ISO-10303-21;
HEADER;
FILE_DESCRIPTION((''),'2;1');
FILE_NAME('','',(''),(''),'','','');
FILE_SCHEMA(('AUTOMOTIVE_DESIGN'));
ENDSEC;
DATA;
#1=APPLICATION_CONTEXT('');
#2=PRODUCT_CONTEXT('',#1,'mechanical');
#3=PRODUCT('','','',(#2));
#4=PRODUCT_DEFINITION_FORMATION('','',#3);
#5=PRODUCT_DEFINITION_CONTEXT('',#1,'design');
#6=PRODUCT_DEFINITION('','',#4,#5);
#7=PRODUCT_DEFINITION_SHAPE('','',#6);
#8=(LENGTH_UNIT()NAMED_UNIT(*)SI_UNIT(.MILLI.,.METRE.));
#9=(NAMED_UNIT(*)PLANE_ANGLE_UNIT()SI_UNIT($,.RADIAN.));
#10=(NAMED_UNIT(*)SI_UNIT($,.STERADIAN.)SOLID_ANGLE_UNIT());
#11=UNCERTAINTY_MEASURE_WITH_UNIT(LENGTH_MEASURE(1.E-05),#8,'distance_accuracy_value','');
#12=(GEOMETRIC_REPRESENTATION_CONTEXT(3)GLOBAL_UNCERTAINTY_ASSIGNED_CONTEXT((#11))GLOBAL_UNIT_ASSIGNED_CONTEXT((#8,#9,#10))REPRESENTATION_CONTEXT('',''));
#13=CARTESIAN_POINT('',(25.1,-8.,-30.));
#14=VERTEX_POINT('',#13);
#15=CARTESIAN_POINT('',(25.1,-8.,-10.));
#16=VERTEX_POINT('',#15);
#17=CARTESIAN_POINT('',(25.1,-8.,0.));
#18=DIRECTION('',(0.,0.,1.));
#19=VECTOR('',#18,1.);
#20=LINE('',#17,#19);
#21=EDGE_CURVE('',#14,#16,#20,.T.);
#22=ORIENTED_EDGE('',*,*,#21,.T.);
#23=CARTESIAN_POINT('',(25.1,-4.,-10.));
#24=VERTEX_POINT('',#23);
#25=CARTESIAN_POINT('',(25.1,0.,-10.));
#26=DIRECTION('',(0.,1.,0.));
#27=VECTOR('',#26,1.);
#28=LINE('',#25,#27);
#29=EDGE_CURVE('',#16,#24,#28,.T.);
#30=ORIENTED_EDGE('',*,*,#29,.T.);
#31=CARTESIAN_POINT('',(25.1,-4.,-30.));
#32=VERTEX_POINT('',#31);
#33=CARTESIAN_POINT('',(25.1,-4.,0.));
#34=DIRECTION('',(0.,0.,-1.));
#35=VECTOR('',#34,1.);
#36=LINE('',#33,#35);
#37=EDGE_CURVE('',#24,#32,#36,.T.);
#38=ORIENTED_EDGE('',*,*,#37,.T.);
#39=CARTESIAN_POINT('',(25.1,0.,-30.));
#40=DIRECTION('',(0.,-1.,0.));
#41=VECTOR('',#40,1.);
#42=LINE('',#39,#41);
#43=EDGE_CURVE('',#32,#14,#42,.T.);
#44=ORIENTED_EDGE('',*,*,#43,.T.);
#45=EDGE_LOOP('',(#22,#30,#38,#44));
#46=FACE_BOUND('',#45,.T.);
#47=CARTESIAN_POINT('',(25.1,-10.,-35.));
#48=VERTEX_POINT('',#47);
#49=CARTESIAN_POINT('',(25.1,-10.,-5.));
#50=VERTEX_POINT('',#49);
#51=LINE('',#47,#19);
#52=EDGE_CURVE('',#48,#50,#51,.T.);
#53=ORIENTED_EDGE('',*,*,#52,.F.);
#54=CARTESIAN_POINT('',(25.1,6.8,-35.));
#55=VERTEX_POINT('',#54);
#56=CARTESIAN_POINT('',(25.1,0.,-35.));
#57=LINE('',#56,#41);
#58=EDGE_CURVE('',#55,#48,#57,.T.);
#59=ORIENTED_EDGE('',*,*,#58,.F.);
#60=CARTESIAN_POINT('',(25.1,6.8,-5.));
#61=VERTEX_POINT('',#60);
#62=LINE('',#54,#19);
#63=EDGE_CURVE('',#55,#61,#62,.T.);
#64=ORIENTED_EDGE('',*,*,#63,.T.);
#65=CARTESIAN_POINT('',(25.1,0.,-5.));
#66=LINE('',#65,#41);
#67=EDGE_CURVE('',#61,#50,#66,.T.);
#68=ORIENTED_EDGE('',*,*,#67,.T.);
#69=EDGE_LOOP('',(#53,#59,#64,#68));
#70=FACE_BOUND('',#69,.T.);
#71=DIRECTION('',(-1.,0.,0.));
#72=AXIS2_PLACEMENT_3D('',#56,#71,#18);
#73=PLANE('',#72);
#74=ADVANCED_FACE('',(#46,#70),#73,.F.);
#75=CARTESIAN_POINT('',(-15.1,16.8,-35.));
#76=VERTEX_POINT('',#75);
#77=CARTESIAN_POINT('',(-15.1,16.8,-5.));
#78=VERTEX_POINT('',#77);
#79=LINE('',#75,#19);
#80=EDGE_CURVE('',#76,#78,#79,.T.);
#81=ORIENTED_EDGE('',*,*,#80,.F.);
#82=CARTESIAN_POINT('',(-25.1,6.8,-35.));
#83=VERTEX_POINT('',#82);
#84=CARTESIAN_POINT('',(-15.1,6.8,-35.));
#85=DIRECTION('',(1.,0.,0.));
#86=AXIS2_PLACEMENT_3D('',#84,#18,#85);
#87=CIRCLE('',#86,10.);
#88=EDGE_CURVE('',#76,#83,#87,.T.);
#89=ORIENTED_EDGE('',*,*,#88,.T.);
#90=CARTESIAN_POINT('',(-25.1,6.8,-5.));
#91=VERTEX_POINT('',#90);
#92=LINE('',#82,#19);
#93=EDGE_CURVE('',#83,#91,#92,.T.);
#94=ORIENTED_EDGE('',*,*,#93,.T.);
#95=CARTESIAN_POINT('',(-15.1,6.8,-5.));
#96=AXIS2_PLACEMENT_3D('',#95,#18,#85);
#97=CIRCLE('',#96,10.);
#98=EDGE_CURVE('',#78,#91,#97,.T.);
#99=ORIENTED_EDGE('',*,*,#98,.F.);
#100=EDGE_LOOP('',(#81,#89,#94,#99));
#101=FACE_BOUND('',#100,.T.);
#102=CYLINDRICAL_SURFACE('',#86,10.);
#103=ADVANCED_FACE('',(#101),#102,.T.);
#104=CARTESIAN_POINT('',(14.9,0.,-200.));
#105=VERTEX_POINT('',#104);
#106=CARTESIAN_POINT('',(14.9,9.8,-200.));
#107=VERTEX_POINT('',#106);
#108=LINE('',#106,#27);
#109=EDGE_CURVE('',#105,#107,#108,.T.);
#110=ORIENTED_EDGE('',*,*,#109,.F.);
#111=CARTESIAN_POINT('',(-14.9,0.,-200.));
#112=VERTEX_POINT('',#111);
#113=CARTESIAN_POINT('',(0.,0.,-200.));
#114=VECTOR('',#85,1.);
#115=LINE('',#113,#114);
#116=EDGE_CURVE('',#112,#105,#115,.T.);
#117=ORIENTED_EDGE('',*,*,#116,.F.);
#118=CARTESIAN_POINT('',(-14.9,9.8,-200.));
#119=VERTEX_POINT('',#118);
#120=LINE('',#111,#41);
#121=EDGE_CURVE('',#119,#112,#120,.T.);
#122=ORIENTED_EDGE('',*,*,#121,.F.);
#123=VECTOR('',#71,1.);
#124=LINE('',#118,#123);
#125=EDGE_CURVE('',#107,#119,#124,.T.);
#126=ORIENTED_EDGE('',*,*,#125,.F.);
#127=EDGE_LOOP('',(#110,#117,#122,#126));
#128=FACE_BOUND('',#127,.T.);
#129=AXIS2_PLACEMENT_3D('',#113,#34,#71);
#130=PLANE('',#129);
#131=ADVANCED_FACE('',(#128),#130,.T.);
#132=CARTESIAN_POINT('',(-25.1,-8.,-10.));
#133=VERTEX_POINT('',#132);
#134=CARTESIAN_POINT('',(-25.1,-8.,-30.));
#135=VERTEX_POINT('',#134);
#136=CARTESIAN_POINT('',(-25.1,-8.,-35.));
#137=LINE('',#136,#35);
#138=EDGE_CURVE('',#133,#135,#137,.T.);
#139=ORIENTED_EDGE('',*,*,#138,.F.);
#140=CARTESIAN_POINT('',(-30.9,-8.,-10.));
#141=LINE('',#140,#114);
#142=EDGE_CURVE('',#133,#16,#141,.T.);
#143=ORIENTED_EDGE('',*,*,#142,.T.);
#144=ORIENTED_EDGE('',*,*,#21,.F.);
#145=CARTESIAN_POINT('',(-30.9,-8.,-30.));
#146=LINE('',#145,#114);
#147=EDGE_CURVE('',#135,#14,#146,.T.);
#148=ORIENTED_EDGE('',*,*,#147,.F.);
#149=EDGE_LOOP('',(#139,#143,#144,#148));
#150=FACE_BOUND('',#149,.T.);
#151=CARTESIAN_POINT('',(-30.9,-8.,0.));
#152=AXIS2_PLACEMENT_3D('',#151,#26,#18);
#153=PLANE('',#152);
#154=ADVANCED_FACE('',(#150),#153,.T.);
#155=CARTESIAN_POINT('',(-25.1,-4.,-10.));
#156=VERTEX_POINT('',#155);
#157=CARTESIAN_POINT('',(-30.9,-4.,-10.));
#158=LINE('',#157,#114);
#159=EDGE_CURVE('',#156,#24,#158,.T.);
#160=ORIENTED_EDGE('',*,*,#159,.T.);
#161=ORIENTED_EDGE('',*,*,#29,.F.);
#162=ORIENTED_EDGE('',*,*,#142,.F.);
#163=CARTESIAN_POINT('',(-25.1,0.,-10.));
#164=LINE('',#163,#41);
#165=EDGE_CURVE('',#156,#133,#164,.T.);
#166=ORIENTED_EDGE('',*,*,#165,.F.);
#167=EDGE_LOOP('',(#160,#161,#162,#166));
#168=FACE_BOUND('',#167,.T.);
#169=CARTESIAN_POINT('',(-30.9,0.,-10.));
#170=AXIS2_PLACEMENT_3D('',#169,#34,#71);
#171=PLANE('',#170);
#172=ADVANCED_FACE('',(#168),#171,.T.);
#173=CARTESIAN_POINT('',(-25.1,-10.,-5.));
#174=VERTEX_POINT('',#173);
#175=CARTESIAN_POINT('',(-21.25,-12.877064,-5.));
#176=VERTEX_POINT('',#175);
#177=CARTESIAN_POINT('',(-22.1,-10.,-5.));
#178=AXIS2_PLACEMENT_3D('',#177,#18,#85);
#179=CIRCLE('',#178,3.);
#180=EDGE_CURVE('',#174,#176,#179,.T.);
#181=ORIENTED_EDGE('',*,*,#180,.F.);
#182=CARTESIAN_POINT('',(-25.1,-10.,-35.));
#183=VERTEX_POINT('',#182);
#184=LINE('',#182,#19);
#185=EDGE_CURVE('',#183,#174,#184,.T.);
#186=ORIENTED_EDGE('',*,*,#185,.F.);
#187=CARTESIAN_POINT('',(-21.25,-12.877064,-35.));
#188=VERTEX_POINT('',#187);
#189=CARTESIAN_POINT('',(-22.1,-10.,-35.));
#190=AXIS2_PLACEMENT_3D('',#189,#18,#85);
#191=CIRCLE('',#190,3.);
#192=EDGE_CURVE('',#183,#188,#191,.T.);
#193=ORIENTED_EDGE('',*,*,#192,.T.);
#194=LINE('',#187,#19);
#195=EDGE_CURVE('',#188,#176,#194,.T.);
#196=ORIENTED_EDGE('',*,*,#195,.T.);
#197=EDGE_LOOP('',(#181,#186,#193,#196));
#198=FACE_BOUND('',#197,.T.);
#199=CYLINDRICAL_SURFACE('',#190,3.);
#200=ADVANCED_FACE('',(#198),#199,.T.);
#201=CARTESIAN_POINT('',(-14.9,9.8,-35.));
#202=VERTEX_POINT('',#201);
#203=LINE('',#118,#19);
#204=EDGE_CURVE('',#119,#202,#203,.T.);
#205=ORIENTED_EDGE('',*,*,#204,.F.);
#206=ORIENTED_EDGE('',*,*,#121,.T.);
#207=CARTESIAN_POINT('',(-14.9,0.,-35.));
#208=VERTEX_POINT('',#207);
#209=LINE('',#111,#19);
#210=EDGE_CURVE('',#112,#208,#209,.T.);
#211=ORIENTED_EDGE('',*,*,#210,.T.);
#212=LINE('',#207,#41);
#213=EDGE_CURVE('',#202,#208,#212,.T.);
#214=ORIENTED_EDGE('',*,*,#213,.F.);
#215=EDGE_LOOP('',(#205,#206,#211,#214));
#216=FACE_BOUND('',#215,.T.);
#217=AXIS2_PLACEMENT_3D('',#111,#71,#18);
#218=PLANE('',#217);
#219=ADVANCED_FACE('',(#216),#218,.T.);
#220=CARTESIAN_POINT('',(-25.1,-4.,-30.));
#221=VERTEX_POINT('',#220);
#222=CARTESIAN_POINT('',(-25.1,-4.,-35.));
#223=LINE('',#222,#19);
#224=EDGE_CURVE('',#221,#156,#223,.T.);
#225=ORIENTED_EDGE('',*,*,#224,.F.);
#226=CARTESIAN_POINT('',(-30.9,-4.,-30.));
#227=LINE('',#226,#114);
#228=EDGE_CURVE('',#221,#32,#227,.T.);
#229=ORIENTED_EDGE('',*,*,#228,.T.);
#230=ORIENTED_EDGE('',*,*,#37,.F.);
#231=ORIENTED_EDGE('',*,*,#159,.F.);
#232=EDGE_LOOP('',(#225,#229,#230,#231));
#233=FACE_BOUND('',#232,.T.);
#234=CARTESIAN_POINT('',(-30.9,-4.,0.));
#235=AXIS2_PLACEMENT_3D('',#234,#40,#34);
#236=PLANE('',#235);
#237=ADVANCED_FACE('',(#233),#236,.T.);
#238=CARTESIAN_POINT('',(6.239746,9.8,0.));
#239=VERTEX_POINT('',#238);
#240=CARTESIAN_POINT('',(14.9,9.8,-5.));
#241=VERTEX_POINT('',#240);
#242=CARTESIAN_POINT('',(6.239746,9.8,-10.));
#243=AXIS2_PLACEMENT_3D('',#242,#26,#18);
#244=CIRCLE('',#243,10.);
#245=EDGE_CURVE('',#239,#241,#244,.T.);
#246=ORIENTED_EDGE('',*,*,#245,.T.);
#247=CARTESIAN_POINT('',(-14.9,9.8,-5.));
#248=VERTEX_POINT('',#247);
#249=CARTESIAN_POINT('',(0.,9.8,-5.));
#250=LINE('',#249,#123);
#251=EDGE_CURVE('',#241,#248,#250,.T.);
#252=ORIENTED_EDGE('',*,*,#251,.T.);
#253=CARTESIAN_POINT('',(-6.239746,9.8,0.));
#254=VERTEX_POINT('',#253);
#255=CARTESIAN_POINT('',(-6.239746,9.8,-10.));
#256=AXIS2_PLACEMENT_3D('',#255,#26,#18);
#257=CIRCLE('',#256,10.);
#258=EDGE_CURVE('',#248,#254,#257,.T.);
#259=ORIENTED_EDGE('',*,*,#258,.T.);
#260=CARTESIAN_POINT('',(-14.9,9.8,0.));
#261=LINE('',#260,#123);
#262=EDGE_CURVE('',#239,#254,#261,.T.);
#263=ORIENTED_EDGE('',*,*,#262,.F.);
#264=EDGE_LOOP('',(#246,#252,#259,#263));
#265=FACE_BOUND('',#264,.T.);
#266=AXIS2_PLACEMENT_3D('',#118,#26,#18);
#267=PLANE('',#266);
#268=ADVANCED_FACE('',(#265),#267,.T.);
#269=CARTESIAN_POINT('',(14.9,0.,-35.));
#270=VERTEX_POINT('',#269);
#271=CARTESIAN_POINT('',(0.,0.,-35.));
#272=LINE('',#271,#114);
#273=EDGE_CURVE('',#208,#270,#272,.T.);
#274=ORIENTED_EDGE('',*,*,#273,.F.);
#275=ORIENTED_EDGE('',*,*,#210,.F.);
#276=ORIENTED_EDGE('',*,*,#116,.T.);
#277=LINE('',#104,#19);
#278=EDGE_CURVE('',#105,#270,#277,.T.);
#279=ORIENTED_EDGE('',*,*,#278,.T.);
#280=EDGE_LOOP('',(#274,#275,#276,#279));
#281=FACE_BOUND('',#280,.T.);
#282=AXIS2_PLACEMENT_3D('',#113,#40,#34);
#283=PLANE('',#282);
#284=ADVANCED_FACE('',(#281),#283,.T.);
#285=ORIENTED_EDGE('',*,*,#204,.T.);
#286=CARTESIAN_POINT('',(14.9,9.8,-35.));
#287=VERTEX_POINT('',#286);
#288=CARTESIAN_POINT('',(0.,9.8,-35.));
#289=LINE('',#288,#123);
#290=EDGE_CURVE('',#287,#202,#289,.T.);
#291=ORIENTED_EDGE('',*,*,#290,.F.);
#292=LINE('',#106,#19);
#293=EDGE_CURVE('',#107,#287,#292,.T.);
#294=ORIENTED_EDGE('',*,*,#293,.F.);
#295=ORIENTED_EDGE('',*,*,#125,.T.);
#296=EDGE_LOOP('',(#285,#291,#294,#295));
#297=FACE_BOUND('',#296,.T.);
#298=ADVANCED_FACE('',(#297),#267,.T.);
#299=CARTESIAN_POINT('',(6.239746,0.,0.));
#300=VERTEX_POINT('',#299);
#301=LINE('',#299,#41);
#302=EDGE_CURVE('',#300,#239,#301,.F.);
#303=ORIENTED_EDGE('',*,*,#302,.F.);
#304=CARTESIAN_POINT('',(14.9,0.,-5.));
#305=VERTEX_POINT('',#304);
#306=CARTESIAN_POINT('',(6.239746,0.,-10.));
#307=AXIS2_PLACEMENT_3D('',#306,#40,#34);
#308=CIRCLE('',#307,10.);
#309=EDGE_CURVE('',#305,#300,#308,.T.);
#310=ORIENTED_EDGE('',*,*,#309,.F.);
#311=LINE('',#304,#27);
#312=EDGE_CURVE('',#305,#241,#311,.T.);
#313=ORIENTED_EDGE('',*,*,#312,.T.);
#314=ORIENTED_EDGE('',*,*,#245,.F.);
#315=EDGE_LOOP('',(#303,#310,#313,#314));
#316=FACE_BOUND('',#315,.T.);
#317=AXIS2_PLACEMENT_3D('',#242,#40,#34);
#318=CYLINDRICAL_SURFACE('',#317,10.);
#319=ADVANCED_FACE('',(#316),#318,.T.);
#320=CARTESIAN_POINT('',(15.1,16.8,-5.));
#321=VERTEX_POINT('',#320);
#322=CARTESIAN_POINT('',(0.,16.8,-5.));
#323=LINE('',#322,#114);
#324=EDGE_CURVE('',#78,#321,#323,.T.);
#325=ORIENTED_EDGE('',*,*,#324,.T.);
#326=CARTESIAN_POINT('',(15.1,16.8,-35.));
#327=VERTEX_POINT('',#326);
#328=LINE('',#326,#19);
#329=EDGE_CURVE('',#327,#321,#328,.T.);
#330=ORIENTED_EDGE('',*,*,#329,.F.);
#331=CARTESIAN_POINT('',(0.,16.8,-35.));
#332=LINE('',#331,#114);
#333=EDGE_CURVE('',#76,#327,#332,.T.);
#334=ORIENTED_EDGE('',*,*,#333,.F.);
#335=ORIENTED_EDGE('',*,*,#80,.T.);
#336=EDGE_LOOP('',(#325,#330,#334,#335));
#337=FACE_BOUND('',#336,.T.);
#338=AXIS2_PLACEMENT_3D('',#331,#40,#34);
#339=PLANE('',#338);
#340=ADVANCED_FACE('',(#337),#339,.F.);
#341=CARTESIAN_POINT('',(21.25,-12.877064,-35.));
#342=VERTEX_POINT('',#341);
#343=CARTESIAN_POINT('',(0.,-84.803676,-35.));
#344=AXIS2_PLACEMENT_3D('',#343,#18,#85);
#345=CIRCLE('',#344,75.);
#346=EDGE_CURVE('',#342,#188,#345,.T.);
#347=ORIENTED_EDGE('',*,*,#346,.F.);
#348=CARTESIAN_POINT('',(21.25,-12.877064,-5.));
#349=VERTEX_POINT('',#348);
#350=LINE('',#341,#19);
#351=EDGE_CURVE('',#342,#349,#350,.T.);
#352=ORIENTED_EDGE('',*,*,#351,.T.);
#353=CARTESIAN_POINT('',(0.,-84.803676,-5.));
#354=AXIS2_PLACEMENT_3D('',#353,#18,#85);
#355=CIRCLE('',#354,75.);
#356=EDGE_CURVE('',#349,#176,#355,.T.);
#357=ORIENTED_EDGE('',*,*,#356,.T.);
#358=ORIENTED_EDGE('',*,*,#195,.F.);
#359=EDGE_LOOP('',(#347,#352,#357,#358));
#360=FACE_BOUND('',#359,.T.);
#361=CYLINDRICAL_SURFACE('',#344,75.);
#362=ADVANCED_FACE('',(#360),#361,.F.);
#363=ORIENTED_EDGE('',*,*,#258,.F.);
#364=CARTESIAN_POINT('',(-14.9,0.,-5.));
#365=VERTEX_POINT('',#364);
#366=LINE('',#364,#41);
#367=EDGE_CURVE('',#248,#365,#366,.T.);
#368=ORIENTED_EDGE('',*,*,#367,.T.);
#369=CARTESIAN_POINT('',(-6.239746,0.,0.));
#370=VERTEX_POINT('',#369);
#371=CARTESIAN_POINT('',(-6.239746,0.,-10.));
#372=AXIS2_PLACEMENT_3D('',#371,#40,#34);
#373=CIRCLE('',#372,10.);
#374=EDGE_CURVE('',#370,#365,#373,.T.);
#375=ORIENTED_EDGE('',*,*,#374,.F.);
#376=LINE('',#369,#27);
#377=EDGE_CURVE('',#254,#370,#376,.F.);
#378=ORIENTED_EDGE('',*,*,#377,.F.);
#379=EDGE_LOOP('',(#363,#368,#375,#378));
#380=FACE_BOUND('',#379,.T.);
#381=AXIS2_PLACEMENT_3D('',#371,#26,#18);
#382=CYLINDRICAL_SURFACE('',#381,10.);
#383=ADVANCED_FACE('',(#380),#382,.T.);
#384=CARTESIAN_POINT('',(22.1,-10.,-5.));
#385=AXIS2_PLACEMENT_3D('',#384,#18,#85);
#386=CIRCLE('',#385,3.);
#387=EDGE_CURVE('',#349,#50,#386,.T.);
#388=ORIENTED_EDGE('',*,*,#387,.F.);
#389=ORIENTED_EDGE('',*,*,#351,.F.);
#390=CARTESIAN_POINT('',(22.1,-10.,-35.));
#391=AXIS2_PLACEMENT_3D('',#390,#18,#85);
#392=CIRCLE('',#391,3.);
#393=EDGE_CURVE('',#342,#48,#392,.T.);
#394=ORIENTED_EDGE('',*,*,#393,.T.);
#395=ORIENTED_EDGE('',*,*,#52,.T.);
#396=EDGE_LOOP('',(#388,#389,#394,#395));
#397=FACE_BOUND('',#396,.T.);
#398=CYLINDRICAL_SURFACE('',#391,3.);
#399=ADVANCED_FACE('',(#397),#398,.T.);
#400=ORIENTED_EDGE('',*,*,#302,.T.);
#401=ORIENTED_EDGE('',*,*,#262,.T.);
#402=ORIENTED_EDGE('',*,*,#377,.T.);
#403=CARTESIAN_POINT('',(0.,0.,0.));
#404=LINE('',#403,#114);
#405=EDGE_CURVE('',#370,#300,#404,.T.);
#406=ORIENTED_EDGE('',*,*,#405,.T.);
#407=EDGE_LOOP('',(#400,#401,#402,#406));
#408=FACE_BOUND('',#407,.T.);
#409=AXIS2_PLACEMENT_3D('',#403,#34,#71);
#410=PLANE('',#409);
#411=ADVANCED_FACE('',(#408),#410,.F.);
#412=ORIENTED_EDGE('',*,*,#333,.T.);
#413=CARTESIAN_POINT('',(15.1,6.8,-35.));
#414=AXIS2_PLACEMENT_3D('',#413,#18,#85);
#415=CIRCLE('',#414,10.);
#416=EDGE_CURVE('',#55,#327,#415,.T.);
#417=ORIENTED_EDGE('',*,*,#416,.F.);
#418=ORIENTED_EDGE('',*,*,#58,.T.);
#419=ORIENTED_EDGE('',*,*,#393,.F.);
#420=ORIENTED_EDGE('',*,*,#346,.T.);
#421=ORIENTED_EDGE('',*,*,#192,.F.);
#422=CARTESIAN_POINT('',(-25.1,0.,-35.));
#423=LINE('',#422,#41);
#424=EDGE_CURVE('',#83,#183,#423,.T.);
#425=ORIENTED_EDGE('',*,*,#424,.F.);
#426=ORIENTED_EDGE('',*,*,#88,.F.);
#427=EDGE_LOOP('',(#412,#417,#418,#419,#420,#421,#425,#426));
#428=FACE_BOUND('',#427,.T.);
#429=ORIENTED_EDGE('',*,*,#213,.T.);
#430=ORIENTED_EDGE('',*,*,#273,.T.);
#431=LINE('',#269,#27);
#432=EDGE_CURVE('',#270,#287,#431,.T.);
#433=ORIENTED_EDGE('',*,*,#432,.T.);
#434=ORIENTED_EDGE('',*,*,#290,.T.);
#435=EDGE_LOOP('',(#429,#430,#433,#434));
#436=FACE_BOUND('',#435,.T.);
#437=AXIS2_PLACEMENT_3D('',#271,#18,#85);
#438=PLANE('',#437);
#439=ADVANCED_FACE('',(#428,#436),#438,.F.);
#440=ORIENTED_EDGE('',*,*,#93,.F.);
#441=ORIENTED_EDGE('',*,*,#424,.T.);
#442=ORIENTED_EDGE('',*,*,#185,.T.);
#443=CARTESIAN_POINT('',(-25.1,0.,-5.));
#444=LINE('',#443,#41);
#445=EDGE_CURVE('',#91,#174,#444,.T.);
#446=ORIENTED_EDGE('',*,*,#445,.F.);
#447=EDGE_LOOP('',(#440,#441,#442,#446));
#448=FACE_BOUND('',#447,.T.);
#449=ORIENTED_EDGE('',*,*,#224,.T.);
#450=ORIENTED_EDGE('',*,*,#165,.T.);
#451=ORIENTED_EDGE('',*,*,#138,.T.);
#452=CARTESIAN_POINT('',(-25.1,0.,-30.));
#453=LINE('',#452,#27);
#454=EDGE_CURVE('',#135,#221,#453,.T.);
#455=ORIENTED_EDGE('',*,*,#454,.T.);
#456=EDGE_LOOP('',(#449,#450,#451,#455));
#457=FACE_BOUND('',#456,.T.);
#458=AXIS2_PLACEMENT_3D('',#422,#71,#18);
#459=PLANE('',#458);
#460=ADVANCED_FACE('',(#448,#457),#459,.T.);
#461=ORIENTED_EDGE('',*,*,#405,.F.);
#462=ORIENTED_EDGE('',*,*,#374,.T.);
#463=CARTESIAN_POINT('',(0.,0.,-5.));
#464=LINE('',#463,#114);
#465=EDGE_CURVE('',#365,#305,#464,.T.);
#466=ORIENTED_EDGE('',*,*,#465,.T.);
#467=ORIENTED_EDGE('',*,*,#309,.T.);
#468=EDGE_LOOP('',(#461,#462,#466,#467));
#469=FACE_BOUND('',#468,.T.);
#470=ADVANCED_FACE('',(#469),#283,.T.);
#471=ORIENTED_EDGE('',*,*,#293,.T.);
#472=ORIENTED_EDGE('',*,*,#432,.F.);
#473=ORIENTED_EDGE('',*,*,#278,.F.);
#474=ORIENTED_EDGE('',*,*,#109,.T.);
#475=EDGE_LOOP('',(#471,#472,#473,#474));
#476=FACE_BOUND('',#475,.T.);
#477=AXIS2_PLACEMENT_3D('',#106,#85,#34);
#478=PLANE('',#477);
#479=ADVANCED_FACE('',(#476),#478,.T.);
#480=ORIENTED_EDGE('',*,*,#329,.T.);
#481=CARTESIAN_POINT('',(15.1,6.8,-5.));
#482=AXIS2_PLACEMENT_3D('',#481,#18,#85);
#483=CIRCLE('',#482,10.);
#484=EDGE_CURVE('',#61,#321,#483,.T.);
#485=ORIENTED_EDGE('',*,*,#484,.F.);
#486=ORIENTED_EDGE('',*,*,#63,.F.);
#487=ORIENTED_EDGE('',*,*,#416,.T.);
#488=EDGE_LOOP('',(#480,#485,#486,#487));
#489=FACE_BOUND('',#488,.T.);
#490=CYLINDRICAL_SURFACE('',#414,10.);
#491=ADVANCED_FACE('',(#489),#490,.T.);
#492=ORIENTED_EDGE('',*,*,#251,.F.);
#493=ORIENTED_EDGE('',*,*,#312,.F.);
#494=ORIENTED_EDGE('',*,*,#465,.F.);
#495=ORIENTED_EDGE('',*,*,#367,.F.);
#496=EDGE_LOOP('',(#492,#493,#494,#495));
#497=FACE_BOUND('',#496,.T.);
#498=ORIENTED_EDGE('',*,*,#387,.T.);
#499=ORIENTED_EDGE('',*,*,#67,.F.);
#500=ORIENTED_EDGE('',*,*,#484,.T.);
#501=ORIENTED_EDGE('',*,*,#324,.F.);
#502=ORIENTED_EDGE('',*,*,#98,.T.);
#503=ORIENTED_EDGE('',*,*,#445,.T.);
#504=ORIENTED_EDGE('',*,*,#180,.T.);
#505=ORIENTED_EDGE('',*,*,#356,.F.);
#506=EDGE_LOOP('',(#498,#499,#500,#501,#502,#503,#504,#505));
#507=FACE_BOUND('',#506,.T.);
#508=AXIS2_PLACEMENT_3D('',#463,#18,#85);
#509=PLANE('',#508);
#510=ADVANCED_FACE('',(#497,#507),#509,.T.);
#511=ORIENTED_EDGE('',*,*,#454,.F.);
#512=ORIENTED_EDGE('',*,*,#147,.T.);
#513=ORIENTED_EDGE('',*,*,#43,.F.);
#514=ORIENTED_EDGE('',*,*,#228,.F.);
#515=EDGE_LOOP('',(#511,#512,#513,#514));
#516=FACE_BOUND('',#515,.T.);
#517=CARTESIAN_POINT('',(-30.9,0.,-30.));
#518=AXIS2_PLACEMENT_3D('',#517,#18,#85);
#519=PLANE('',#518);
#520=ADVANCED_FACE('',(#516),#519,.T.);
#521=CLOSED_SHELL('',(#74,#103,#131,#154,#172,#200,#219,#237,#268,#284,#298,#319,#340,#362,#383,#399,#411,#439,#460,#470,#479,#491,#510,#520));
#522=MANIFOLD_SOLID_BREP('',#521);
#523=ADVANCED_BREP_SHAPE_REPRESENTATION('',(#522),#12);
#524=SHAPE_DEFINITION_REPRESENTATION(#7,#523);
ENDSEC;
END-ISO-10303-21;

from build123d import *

# Parameters (mm, degrees)
BOSS_EXTRUDE1_DEPTH = 200
SKETCH2_W           = 29.8
SKETCH2_H           = 9.8
BOSS_EXTRUDE2_DEPTH = 30
FILLET1_R           = 10
FILLET2_R           = 10
CUT_EXTRUDE1_DEPTH  = 56


with BuildPart() as part:
    # Sketch1 → Boss-Extrude1 (new body)
    with BuildSketch(Plane.XY):
        Polygon((0, 0), (14.9, 0), (14.9, 9.8), (-14.9, 9.8), (-14.9, 0), align=None)
    extrude(amount=-BOSS_EXTRUDE1_DEPTH)

    # Sketch2 → Boss-Extrude2 (add)
    with BuildSketch(Plane.XY.offset(-5)):
        with BuildLine():
            ThreePointArc((-25.1, -10), (-24.221320344, -12.121320344), (-22.1, -13))
            ThreePointArc((-22.1, -13), (-21.670577963, -12.969107057), (-21.25, -12.877064476))
            ThreePointArc((-21.25, -12.877064476), (0, -9.80367638), (21.25, -12.877064476))
            ThreePointArc((21.25, -12.877064476), (21.670577963, -12.969107057), (22.1, -13))
            ThreePointArc((22.1, -13), (24.221320344, -12.121320344), (25.1, -10))
            Line((25.1, -10), (25.1, 6.8))
            ThreePointArc((25.1, 6.8), (22.171067812, 13.871067812), (15.1, 16.8))
            Line((15.1, 16.8), (-14.9, 16.8))
            Line((-14.9, 16.8), (-15.1, 16.8))
            ThreePointArc((-15.1, 16.8), (-22.171067812, 13.871067812), (-25.1, 6.8))
            Line((-25.1, 6.8), (-25.1, -10))
        make_face()
        with Locations((0, 4.9)):
            Rectangle(SKETCH2_W, SKETCH2_H, mode=Mode.SUBTRACT)
    extrude(amount=-BOSS_EXTRUDE2_DEPTH)

    # Fillet1
    # the kernel refuses this fillet: 10 mm, written as the material it takes off along each edge
    with BuildSketch(Plane(origin=(14.9, -21.650635095, 0), x_dir=(0, 0, -1), z_dir=(0, 1, 0))) as fillet1_piece_1:
        with BuildLine():
            CenterArc((10, 8.660254038), FILLET1_R, 180, 60)
            Line((0, 8.660254038), (-0.2, 8.660254038))
            Line((-0.2, 8.660254038), (-0.2, 0))
            Line((-0.2, 0), (0, -0.2))
            ThreePointArc((0, -0.2), (2.5, -0.2), (4.9, -0.173205081))
            Line((4.9, -0.173205081), (5, 0))
        make_face()
    extrude(amount=53.101270189, mode=Mode.SUBTRACT)

    # Fillet2
    # the kernel refuses this fillet: 10 mm, written as the material it takes off along each edge
    with BuildSketch(Plane(origin=(-14.9, 31.450635095, 0), x_dir=(1, 0, 0), z_dir=(0, -1, 0))) as fillet2_piece_1:
        with BuildLine():
            CenterArc((8.660254038, -10), FILLET2_R, 90, 60)
            Line((0, -5), (-0.173205081, -4.9))
            ThreePointArc((-0.173205081, -4.9), (-0.2, -2.5), (-0.2, 0))
            Line((-0.2, 0), (0, 0.2))
            Line((0, 0.2), (8.660254038, 0.2))
            Line((8.660254038, 0.2), (8.660254038, 0))
        make_face()
    extrude(amount=53.101270189, mode=Mode.SUBTRACT)

    # Sketch3 → Cut-Extrude1 (cut)
    with BuildSketch(Plane(origin=(25.1, 0, 0), x_dir=(0, 0, -1), z_dir=(1, 0, 0))):
        Polygon((30, -4), (30, -8), (20, -8), (10, -8), (10, -4), align=None)
    extrude(amount=-CUT_EXTRUDE1_DEPTH, mode=Mode.SUBTRACT)


solid = part.part
